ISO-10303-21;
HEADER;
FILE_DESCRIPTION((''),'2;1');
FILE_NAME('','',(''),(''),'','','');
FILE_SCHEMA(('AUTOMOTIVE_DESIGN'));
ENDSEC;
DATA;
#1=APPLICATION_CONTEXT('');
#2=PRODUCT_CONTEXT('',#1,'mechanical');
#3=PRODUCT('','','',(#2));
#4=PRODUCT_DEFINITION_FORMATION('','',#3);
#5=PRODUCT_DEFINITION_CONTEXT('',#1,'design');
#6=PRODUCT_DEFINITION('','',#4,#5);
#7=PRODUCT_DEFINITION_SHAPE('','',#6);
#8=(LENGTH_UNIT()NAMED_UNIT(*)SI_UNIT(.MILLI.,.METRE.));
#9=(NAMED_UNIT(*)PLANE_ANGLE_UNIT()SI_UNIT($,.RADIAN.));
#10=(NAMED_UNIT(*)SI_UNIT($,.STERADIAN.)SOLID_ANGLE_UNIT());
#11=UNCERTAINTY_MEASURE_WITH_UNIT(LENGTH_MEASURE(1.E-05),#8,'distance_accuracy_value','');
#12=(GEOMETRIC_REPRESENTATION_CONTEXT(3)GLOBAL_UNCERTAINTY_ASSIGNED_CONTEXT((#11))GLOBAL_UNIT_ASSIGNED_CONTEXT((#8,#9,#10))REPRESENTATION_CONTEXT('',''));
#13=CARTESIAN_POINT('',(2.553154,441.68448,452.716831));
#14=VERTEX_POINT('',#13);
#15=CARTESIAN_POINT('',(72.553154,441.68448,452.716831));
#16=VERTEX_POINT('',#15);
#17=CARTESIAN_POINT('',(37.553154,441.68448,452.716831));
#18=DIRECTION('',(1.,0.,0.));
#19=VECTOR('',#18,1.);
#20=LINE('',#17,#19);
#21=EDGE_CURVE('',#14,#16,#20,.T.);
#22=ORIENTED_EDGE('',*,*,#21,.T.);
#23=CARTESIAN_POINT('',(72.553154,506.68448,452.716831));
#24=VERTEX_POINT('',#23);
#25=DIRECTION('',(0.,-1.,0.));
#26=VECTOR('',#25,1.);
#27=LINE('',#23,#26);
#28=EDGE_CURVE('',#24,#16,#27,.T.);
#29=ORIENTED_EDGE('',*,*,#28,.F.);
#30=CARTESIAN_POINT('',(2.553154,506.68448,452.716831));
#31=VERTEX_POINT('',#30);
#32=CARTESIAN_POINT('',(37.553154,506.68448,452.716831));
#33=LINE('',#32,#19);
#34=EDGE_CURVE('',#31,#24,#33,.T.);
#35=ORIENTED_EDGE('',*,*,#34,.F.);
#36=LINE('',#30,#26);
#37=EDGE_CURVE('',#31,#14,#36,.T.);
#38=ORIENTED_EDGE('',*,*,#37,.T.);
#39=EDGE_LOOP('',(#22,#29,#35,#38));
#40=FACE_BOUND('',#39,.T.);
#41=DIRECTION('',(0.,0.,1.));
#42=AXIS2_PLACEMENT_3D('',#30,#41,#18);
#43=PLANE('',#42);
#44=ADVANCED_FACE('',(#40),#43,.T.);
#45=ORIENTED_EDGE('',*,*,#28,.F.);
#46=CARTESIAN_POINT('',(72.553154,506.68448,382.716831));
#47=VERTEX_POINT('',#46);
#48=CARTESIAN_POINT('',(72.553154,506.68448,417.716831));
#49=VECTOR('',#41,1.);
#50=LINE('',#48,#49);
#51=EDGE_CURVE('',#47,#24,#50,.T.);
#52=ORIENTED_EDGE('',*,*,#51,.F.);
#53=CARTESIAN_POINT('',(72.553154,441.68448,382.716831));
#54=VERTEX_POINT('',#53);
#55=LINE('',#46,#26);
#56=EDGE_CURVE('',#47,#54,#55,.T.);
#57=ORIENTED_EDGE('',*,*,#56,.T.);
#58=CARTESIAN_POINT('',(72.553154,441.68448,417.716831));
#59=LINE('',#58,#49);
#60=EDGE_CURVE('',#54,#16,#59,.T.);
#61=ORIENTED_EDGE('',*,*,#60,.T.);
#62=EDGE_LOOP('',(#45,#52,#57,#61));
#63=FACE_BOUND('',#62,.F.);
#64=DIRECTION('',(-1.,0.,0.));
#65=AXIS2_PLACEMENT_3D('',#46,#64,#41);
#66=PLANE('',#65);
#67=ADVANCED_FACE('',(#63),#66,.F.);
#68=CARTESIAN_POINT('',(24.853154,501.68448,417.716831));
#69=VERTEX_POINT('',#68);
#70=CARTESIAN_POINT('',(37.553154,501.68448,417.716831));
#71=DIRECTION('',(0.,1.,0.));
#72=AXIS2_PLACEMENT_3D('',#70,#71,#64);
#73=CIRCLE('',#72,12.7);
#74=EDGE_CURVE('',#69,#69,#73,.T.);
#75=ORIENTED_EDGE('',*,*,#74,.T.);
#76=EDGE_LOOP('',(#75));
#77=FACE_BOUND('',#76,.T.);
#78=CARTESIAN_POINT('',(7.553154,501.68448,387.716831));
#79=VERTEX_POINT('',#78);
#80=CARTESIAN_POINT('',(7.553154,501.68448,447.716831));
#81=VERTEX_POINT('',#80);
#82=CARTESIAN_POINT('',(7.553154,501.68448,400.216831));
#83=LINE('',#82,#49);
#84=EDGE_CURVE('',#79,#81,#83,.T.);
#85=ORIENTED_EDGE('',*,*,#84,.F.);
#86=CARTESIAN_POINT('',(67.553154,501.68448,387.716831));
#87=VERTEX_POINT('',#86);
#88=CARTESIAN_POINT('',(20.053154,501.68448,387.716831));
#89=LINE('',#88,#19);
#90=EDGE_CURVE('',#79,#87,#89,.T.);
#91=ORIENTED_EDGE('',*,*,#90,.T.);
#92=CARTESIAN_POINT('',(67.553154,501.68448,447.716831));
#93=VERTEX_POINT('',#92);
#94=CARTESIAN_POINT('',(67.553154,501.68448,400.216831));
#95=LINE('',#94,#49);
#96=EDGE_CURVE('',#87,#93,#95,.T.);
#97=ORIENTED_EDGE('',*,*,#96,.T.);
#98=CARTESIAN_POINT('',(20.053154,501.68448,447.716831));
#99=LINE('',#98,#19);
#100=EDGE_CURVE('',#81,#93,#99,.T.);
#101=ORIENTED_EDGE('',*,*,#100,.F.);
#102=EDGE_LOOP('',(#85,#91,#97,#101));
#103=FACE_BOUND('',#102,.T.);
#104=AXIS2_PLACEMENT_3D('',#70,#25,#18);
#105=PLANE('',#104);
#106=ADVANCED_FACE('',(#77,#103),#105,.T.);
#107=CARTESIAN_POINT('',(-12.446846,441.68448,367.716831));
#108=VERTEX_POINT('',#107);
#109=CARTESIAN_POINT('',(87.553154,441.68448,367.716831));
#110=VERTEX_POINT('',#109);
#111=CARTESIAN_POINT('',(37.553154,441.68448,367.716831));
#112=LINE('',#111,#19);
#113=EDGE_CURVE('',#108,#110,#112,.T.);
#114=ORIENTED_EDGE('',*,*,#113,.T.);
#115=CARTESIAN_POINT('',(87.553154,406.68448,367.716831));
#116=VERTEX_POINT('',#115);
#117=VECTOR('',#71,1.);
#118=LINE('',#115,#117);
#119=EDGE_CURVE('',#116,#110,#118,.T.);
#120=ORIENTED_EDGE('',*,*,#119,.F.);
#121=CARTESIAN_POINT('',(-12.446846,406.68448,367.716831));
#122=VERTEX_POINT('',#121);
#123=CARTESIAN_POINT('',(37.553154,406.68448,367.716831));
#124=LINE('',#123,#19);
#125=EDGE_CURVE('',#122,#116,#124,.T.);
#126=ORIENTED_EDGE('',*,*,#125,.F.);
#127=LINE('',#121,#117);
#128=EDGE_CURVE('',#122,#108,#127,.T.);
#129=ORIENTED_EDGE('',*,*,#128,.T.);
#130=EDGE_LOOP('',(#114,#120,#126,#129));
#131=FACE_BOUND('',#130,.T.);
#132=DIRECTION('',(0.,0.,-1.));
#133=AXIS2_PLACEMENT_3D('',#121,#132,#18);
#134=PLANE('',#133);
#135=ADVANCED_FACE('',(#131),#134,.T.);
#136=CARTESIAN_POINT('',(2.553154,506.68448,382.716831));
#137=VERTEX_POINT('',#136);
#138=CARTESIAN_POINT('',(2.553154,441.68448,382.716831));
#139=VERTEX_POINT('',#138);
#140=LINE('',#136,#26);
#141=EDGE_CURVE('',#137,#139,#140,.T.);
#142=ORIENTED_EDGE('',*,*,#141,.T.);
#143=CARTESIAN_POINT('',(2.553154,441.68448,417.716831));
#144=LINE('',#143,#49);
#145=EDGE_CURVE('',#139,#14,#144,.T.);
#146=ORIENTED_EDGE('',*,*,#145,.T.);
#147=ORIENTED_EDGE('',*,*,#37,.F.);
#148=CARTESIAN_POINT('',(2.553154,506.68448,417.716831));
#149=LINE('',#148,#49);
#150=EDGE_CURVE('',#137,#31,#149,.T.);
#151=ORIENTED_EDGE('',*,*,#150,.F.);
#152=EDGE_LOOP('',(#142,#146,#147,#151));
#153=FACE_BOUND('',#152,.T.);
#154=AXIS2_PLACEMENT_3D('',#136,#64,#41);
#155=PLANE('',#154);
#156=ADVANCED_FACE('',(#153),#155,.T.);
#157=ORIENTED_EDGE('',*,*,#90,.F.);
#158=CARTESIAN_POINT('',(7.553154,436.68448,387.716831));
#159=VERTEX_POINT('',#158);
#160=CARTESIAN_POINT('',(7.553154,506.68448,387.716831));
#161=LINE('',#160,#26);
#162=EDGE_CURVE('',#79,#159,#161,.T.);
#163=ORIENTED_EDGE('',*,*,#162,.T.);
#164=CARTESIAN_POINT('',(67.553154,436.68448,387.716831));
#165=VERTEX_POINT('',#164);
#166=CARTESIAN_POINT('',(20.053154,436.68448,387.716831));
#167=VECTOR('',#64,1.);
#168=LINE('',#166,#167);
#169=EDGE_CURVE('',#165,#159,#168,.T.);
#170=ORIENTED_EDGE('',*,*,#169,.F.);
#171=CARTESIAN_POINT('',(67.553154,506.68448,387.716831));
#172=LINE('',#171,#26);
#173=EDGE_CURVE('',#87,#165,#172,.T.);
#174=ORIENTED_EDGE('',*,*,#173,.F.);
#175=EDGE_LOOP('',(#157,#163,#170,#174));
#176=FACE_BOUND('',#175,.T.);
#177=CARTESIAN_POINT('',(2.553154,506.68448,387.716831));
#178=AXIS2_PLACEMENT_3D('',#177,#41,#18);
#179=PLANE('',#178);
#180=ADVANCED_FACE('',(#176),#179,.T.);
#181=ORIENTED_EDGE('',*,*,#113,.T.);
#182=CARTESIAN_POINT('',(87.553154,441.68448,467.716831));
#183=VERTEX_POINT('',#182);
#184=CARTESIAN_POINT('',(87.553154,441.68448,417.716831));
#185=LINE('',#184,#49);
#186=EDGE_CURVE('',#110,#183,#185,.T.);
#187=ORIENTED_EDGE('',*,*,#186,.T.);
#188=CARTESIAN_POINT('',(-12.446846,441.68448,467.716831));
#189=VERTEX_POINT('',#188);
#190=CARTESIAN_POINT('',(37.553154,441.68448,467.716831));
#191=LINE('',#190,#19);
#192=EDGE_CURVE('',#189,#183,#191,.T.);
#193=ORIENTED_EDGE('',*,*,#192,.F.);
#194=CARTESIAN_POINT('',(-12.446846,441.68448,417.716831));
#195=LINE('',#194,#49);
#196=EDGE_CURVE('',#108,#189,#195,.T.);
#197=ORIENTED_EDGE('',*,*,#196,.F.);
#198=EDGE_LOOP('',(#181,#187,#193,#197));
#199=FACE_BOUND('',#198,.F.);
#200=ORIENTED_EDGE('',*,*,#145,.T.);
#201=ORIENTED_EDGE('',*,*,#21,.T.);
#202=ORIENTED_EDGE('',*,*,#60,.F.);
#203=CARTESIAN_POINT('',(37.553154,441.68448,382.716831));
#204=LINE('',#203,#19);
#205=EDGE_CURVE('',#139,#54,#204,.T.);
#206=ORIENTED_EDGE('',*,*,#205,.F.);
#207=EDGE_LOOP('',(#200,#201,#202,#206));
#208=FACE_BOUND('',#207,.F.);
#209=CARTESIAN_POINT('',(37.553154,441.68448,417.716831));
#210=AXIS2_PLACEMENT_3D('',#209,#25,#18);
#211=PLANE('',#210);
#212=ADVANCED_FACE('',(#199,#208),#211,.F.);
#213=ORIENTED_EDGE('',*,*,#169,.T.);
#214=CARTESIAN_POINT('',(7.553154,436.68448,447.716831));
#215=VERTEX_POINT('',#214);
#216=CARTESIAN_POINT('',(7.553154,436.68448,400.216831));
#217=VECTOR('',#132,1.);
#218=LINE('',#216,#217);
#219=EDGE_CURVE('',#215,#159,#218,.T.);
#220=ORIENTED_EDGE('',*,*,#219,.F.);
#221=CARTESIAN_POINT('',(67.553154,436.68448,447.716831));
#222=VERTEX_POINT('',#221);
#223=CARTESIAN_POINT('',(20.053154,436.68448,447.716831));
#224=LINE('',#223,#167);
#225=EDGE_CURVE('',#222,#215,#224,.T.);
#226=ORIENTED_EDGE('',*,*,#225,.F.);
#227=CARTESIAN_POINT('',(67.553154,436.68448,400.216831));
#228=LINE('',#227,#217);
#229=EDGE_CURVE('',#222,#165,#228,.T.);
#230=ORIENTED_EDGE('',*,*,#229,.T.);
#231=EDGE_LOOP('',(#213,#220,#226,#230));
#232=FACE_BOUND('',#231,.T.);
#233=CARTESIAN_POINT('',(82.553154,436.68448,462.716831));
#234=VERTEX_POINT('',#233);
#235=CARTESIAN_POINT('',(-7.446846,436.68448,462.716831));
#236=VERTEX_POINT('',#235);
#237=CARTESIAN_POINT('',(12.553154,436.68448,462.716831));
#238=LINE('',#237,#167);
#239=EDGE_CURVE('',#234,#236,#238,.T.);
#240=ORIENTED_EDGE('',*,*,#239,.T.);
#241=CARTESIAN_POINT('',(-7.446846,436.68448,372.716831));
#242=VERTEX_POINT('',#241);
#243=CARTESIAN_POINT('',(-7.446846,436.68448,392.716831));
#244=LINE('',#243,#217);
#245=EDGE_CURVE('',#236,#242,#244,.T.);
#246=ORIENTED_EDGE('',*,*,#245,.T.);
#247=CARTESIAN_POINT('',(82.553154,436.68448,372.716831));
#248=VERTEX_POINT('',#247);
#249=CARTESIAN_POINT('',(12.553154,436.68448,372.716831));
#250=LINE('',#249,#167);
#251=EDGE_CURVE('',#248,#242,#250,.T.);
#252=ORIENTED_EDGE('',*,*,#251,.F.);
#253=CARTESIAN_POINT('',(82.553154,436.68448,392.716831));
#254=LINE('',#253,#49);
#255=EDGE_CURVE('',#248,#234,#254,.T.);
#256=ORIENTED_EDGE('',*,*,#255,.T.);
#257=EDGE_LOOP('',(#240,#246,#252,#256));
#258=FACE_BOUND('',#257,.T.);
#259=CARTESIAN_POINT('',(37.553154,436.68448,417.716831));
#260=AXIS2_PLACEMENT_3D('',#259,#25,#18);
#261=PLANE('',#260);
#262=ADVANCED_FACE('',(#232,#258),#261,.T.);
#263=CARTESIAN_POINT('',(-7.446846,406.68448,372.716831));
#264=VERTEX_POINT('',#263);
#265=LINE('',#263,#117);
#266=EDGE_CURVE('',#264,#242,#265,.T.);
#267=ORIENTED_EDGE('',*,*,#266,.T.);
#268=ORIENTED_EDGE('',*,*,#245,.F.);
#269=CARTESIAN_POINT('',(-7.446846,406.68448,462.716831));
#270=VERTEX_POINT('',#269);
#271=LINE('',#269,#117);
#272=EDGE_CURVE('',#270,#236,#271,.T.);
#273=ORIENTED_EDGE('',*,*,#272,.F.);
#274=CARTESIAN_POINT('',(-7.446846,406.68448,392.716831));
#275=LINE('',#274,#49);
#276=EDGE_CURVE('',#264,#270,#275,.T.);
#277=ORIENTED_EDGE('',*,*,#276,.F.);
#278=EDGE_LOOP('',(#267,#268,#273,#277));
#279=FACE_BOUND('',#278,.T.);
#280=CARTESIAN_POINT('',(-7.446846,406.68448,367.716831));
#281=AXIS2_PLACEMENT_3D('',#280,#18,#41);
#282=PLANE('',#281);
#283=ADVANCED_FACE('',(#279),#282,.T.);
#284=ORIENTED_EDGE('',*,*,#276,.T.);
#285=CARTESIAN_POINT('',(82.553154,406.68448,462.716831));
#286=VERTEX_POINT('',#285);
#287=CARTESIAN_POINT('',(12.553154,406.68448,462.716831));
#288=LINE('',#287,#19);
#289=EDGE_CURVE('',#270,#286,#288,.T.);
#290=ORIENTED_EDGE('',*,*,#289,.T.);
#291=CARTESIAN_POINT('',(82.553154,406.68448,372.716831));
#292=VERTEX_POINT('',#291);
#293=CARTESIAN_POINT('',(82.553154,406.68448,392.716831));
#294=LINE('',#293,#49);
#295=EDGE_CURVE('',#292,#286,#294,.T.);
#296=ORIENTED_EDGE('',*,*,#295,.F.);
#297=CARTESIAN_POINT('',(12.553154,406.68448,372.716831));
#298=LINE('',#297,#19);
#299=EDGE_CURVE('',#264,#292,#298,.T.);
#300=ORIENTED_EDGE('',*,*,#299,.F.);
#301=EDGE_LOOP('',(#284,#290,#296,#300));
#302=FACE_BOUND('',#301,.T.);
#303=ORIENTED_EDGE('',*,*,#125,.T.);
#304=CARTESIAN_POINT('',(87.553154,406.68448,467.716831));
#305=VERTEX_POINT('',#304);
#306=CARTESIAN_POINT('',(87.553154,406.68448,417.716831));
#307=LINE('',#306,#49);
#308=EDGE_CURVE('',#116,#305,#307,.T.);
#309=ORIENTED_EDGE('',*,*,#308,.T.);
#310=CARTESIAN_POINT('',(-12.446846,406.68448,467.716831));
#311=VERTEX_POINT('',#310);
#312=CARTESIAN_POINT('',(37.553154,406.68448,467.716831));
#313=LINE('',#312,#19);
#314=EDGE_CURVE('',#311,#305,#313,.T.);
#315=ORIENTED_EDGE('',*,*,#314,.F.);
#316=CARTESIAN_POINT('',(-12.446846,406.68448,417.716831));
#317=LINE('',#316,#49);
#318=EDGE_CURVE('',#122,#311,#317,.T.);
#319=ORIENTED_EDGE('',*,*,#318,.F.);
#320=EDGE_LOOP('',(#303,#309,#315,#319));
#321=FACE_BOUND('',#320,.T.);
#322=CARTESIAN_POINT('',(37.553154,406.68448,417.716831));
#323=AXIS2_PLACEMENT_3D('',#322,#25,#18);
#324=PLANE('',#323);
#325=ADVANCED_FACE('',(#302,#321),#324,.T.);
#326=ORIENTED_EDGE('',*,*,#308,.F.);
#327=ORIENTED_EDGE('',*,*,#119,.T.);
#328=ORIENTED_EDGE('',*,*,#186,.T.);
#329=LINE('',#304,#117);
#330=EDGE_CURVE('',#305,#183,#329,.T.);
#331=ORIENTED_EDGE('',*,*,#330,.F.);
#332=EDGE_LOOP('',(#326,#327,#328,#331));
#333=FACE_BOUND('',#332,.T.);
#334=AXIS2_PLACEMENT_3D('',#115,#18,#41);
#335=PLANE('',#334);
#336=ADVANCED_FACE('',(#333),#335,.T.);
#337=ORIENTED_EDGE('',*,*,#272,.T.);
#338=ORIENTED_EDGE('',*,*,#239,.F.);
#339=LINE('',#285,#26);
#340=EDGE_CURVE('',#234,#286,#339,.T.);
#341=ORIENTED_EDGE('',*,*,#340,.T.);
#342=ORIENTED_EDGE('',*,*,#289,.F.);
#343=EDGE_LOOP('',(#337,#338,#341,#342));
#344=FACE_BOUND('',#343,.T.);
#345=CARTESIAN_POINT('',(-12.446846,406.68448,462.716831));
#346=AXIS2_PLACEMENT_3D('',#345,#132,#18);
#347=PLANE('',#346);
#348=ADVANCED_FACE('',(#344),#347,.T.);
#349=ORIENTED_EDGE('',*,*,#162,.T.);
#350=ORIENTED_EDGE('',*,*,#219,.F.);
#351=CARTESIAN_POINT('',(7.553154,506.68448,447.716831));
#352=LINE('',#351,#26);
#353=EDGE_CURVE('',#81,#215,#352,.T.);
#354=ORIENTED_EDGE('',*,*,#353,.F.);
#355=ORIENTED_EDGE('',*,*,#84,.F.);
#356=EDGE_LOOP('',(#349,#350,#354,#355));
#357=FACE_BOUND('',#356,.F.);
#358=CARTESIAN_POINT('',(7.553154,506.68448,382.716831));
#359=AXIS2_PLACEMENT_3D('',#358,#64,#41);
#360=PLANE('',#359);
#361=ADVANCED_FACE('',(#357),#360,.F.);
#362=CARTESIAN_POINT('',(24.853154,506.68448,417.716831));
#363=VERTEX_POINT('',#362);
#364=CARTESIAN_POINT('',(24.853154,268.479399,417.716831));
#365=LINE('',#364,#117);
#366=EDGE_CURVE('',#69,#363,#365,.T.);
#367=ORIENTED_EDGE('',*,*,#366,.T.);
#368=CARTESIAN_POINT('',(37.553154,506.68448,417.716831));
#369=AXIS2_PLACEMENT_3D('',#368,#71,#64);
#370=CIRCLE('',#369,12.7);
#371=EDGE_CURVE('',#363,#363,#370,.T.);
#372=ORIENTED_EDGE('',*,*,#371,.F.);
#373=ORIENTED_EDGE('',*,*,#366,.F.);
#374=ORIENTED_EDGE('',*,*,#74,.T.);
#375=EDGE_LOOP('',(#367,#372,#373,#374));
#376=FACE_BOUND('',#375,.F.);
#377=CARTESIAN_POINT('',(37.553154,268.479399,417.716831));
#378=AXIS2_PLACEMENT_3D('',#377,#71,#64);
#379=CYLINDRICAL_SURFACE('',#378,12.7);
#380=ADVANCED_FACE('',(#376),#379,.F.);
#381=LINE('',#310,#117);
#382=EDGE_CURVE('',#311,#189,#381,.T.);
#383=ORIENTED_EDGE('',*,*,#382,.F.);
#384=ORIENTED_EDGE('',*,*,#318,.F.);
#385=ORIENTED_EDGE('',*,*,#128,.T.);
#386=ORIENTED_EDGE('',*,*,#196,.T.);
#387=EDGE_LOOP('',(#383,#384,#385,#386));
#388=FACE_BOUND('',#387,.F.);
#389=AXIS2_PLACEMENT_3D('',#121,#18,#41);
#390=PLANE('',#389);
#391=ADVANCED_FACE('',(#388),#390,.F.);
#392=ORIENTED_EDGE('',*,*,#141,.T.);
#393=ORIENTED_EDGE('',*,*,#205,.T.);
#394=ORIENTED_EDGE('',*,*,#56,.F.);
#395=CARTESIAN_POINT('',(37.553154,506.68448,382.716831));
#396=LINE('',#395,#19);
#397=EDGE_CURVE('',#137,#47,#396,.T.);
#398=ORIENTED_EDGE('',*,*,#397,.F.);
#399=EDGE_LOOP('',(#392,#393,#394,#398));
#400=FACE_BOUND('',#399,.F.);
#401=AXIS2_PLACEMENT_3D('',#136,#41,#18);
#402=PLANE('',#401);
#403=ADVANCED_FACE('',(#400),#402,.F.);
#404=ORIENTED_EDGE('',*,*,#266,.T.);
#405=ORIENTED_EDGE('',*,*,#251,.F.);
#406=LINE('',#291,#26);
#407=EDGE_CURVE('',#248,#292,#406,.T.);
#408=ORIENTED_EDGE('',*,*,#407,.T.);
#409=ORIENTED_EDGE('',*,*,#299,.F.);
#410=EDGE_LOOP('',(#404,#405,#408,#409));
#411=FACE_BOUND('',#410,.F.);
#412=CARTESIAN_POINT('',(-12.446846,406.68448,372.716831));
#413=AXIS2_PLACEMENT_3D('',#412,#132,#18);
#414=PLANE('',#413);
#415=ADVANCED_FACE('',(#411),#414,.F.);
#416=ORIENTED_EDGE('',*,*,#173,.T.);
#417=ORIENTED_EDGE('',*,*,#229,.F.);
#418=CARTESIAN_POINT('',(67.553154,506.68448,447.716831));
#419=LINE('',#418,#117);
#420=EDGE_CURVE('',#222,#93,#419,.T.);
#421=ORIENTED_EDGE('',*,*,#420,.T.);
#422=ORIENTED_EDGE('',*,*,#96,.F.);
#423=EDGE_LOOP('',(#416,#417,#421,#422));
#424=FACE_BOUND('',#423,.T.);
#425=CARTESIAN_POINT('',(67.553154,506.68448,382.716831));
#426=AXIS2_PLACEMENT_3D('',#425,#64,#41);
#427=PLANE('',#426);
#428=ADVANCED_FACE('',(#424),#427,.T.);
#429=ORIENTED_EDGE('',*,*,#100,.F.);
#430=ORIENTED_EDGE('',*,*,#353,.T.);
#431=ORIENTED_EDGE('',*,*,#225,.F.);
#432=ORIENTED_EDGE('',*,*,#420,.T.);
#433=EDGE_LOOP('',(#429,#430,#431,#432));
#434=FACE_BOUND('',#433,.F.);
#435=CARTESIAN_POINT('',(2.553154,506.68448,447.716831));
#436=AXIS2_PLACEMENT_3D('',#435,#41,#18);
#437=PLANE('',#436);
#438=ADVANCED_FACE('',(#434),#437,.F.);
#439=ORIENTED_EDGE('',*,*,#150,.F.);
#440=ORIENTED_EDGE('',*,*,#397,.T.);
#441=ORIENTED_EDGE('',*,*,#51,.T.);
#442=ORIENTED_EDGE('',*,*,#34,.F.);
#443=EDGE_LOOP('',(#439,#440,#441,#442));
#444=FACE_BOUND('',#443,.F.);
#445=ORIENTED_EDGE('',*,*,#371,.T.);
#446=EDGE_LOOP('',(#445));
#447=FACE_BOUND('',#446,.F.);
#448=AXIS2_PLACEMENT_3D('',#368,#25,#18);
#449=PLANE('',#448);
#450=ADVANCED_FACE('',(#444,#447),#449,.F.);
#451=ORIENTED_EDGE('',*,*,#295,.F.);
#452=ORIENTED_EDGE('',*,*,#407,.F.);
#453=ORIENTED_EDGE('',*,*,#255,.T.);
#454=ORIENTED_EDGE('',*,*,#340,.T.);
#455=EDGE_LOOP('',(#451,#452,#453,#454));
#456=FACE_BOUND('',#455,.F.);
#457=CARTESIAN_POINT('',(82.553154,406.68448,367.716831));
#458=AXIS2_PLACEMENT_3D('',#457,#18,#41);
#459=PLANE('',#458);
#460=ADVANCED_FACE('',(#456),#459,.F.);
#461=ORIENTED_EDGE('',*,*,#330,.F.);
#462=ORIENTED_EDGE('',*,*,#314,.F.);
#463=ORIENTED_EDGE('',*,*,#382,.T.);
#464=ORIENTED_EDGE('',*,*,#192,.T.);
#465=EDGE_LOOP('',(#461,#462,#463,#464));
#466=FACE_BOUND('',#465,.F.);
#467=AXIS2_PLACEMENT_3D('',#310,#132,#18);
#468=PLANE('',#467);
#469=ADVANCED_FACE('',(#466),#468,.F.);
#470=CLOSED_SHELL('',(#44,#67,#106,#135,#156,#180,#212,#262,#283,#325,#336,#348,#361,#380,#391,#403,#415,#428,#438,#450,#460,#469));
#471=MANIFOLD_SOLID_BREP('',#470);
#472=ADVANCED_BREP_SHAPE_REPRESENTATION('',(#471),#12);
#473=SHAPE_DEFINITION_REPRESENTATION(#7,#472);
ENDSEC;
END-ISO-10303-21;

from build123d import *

# Parameters (mm, degrees)
F10_W     = 100
F10_H     = 100
F14_DEPTH = 35
F13_W     = 70
F13_H     = 70
F15_DEPTH = 65
F16_T     = -5
F21_D     = 25.4


# Not quite as in the source:
# - the program builds the solid bodies; features that only make, move or delete a surface that nothing else refers to are left out


with BuildPart() as f14:
    # F10 (on offset) → F14 (new body, through all)
    with BuildSketch(Plane.XZ.offset(-406.68448)):
        with Locations((37.5531539321, 417.7168309689)):
            Rectangle(F10_W, F10_H)
    extrude(amount=-F14_DEPTH)

    # F13 (on offset) → F15 (join, through all)
    with BuildSketch(Plane.XZ.offset(-506.68448)):
        with Locations((37.5531539321, 417.7168309689)):
            Rectangle(F13_W, F13_H)
    extrude(amount=F15_DEPTH)

    # F16
    f16_openings = [f14.faces().sort_by_distance(p)[0] for p in [
        (37.553154, 406.68448, 417.716831),
    ]]
    offset(amount=F16_T, openings=f16_openings, kind=Kind.INTERSECTION)

    # F21 (through all)
    with Locations(Plane.XZ.offset(-441.68448)):
        with Locations((37.5531539321, 417.7168309689)):
            Hole(F21_D / 2)


solid = f14.part
